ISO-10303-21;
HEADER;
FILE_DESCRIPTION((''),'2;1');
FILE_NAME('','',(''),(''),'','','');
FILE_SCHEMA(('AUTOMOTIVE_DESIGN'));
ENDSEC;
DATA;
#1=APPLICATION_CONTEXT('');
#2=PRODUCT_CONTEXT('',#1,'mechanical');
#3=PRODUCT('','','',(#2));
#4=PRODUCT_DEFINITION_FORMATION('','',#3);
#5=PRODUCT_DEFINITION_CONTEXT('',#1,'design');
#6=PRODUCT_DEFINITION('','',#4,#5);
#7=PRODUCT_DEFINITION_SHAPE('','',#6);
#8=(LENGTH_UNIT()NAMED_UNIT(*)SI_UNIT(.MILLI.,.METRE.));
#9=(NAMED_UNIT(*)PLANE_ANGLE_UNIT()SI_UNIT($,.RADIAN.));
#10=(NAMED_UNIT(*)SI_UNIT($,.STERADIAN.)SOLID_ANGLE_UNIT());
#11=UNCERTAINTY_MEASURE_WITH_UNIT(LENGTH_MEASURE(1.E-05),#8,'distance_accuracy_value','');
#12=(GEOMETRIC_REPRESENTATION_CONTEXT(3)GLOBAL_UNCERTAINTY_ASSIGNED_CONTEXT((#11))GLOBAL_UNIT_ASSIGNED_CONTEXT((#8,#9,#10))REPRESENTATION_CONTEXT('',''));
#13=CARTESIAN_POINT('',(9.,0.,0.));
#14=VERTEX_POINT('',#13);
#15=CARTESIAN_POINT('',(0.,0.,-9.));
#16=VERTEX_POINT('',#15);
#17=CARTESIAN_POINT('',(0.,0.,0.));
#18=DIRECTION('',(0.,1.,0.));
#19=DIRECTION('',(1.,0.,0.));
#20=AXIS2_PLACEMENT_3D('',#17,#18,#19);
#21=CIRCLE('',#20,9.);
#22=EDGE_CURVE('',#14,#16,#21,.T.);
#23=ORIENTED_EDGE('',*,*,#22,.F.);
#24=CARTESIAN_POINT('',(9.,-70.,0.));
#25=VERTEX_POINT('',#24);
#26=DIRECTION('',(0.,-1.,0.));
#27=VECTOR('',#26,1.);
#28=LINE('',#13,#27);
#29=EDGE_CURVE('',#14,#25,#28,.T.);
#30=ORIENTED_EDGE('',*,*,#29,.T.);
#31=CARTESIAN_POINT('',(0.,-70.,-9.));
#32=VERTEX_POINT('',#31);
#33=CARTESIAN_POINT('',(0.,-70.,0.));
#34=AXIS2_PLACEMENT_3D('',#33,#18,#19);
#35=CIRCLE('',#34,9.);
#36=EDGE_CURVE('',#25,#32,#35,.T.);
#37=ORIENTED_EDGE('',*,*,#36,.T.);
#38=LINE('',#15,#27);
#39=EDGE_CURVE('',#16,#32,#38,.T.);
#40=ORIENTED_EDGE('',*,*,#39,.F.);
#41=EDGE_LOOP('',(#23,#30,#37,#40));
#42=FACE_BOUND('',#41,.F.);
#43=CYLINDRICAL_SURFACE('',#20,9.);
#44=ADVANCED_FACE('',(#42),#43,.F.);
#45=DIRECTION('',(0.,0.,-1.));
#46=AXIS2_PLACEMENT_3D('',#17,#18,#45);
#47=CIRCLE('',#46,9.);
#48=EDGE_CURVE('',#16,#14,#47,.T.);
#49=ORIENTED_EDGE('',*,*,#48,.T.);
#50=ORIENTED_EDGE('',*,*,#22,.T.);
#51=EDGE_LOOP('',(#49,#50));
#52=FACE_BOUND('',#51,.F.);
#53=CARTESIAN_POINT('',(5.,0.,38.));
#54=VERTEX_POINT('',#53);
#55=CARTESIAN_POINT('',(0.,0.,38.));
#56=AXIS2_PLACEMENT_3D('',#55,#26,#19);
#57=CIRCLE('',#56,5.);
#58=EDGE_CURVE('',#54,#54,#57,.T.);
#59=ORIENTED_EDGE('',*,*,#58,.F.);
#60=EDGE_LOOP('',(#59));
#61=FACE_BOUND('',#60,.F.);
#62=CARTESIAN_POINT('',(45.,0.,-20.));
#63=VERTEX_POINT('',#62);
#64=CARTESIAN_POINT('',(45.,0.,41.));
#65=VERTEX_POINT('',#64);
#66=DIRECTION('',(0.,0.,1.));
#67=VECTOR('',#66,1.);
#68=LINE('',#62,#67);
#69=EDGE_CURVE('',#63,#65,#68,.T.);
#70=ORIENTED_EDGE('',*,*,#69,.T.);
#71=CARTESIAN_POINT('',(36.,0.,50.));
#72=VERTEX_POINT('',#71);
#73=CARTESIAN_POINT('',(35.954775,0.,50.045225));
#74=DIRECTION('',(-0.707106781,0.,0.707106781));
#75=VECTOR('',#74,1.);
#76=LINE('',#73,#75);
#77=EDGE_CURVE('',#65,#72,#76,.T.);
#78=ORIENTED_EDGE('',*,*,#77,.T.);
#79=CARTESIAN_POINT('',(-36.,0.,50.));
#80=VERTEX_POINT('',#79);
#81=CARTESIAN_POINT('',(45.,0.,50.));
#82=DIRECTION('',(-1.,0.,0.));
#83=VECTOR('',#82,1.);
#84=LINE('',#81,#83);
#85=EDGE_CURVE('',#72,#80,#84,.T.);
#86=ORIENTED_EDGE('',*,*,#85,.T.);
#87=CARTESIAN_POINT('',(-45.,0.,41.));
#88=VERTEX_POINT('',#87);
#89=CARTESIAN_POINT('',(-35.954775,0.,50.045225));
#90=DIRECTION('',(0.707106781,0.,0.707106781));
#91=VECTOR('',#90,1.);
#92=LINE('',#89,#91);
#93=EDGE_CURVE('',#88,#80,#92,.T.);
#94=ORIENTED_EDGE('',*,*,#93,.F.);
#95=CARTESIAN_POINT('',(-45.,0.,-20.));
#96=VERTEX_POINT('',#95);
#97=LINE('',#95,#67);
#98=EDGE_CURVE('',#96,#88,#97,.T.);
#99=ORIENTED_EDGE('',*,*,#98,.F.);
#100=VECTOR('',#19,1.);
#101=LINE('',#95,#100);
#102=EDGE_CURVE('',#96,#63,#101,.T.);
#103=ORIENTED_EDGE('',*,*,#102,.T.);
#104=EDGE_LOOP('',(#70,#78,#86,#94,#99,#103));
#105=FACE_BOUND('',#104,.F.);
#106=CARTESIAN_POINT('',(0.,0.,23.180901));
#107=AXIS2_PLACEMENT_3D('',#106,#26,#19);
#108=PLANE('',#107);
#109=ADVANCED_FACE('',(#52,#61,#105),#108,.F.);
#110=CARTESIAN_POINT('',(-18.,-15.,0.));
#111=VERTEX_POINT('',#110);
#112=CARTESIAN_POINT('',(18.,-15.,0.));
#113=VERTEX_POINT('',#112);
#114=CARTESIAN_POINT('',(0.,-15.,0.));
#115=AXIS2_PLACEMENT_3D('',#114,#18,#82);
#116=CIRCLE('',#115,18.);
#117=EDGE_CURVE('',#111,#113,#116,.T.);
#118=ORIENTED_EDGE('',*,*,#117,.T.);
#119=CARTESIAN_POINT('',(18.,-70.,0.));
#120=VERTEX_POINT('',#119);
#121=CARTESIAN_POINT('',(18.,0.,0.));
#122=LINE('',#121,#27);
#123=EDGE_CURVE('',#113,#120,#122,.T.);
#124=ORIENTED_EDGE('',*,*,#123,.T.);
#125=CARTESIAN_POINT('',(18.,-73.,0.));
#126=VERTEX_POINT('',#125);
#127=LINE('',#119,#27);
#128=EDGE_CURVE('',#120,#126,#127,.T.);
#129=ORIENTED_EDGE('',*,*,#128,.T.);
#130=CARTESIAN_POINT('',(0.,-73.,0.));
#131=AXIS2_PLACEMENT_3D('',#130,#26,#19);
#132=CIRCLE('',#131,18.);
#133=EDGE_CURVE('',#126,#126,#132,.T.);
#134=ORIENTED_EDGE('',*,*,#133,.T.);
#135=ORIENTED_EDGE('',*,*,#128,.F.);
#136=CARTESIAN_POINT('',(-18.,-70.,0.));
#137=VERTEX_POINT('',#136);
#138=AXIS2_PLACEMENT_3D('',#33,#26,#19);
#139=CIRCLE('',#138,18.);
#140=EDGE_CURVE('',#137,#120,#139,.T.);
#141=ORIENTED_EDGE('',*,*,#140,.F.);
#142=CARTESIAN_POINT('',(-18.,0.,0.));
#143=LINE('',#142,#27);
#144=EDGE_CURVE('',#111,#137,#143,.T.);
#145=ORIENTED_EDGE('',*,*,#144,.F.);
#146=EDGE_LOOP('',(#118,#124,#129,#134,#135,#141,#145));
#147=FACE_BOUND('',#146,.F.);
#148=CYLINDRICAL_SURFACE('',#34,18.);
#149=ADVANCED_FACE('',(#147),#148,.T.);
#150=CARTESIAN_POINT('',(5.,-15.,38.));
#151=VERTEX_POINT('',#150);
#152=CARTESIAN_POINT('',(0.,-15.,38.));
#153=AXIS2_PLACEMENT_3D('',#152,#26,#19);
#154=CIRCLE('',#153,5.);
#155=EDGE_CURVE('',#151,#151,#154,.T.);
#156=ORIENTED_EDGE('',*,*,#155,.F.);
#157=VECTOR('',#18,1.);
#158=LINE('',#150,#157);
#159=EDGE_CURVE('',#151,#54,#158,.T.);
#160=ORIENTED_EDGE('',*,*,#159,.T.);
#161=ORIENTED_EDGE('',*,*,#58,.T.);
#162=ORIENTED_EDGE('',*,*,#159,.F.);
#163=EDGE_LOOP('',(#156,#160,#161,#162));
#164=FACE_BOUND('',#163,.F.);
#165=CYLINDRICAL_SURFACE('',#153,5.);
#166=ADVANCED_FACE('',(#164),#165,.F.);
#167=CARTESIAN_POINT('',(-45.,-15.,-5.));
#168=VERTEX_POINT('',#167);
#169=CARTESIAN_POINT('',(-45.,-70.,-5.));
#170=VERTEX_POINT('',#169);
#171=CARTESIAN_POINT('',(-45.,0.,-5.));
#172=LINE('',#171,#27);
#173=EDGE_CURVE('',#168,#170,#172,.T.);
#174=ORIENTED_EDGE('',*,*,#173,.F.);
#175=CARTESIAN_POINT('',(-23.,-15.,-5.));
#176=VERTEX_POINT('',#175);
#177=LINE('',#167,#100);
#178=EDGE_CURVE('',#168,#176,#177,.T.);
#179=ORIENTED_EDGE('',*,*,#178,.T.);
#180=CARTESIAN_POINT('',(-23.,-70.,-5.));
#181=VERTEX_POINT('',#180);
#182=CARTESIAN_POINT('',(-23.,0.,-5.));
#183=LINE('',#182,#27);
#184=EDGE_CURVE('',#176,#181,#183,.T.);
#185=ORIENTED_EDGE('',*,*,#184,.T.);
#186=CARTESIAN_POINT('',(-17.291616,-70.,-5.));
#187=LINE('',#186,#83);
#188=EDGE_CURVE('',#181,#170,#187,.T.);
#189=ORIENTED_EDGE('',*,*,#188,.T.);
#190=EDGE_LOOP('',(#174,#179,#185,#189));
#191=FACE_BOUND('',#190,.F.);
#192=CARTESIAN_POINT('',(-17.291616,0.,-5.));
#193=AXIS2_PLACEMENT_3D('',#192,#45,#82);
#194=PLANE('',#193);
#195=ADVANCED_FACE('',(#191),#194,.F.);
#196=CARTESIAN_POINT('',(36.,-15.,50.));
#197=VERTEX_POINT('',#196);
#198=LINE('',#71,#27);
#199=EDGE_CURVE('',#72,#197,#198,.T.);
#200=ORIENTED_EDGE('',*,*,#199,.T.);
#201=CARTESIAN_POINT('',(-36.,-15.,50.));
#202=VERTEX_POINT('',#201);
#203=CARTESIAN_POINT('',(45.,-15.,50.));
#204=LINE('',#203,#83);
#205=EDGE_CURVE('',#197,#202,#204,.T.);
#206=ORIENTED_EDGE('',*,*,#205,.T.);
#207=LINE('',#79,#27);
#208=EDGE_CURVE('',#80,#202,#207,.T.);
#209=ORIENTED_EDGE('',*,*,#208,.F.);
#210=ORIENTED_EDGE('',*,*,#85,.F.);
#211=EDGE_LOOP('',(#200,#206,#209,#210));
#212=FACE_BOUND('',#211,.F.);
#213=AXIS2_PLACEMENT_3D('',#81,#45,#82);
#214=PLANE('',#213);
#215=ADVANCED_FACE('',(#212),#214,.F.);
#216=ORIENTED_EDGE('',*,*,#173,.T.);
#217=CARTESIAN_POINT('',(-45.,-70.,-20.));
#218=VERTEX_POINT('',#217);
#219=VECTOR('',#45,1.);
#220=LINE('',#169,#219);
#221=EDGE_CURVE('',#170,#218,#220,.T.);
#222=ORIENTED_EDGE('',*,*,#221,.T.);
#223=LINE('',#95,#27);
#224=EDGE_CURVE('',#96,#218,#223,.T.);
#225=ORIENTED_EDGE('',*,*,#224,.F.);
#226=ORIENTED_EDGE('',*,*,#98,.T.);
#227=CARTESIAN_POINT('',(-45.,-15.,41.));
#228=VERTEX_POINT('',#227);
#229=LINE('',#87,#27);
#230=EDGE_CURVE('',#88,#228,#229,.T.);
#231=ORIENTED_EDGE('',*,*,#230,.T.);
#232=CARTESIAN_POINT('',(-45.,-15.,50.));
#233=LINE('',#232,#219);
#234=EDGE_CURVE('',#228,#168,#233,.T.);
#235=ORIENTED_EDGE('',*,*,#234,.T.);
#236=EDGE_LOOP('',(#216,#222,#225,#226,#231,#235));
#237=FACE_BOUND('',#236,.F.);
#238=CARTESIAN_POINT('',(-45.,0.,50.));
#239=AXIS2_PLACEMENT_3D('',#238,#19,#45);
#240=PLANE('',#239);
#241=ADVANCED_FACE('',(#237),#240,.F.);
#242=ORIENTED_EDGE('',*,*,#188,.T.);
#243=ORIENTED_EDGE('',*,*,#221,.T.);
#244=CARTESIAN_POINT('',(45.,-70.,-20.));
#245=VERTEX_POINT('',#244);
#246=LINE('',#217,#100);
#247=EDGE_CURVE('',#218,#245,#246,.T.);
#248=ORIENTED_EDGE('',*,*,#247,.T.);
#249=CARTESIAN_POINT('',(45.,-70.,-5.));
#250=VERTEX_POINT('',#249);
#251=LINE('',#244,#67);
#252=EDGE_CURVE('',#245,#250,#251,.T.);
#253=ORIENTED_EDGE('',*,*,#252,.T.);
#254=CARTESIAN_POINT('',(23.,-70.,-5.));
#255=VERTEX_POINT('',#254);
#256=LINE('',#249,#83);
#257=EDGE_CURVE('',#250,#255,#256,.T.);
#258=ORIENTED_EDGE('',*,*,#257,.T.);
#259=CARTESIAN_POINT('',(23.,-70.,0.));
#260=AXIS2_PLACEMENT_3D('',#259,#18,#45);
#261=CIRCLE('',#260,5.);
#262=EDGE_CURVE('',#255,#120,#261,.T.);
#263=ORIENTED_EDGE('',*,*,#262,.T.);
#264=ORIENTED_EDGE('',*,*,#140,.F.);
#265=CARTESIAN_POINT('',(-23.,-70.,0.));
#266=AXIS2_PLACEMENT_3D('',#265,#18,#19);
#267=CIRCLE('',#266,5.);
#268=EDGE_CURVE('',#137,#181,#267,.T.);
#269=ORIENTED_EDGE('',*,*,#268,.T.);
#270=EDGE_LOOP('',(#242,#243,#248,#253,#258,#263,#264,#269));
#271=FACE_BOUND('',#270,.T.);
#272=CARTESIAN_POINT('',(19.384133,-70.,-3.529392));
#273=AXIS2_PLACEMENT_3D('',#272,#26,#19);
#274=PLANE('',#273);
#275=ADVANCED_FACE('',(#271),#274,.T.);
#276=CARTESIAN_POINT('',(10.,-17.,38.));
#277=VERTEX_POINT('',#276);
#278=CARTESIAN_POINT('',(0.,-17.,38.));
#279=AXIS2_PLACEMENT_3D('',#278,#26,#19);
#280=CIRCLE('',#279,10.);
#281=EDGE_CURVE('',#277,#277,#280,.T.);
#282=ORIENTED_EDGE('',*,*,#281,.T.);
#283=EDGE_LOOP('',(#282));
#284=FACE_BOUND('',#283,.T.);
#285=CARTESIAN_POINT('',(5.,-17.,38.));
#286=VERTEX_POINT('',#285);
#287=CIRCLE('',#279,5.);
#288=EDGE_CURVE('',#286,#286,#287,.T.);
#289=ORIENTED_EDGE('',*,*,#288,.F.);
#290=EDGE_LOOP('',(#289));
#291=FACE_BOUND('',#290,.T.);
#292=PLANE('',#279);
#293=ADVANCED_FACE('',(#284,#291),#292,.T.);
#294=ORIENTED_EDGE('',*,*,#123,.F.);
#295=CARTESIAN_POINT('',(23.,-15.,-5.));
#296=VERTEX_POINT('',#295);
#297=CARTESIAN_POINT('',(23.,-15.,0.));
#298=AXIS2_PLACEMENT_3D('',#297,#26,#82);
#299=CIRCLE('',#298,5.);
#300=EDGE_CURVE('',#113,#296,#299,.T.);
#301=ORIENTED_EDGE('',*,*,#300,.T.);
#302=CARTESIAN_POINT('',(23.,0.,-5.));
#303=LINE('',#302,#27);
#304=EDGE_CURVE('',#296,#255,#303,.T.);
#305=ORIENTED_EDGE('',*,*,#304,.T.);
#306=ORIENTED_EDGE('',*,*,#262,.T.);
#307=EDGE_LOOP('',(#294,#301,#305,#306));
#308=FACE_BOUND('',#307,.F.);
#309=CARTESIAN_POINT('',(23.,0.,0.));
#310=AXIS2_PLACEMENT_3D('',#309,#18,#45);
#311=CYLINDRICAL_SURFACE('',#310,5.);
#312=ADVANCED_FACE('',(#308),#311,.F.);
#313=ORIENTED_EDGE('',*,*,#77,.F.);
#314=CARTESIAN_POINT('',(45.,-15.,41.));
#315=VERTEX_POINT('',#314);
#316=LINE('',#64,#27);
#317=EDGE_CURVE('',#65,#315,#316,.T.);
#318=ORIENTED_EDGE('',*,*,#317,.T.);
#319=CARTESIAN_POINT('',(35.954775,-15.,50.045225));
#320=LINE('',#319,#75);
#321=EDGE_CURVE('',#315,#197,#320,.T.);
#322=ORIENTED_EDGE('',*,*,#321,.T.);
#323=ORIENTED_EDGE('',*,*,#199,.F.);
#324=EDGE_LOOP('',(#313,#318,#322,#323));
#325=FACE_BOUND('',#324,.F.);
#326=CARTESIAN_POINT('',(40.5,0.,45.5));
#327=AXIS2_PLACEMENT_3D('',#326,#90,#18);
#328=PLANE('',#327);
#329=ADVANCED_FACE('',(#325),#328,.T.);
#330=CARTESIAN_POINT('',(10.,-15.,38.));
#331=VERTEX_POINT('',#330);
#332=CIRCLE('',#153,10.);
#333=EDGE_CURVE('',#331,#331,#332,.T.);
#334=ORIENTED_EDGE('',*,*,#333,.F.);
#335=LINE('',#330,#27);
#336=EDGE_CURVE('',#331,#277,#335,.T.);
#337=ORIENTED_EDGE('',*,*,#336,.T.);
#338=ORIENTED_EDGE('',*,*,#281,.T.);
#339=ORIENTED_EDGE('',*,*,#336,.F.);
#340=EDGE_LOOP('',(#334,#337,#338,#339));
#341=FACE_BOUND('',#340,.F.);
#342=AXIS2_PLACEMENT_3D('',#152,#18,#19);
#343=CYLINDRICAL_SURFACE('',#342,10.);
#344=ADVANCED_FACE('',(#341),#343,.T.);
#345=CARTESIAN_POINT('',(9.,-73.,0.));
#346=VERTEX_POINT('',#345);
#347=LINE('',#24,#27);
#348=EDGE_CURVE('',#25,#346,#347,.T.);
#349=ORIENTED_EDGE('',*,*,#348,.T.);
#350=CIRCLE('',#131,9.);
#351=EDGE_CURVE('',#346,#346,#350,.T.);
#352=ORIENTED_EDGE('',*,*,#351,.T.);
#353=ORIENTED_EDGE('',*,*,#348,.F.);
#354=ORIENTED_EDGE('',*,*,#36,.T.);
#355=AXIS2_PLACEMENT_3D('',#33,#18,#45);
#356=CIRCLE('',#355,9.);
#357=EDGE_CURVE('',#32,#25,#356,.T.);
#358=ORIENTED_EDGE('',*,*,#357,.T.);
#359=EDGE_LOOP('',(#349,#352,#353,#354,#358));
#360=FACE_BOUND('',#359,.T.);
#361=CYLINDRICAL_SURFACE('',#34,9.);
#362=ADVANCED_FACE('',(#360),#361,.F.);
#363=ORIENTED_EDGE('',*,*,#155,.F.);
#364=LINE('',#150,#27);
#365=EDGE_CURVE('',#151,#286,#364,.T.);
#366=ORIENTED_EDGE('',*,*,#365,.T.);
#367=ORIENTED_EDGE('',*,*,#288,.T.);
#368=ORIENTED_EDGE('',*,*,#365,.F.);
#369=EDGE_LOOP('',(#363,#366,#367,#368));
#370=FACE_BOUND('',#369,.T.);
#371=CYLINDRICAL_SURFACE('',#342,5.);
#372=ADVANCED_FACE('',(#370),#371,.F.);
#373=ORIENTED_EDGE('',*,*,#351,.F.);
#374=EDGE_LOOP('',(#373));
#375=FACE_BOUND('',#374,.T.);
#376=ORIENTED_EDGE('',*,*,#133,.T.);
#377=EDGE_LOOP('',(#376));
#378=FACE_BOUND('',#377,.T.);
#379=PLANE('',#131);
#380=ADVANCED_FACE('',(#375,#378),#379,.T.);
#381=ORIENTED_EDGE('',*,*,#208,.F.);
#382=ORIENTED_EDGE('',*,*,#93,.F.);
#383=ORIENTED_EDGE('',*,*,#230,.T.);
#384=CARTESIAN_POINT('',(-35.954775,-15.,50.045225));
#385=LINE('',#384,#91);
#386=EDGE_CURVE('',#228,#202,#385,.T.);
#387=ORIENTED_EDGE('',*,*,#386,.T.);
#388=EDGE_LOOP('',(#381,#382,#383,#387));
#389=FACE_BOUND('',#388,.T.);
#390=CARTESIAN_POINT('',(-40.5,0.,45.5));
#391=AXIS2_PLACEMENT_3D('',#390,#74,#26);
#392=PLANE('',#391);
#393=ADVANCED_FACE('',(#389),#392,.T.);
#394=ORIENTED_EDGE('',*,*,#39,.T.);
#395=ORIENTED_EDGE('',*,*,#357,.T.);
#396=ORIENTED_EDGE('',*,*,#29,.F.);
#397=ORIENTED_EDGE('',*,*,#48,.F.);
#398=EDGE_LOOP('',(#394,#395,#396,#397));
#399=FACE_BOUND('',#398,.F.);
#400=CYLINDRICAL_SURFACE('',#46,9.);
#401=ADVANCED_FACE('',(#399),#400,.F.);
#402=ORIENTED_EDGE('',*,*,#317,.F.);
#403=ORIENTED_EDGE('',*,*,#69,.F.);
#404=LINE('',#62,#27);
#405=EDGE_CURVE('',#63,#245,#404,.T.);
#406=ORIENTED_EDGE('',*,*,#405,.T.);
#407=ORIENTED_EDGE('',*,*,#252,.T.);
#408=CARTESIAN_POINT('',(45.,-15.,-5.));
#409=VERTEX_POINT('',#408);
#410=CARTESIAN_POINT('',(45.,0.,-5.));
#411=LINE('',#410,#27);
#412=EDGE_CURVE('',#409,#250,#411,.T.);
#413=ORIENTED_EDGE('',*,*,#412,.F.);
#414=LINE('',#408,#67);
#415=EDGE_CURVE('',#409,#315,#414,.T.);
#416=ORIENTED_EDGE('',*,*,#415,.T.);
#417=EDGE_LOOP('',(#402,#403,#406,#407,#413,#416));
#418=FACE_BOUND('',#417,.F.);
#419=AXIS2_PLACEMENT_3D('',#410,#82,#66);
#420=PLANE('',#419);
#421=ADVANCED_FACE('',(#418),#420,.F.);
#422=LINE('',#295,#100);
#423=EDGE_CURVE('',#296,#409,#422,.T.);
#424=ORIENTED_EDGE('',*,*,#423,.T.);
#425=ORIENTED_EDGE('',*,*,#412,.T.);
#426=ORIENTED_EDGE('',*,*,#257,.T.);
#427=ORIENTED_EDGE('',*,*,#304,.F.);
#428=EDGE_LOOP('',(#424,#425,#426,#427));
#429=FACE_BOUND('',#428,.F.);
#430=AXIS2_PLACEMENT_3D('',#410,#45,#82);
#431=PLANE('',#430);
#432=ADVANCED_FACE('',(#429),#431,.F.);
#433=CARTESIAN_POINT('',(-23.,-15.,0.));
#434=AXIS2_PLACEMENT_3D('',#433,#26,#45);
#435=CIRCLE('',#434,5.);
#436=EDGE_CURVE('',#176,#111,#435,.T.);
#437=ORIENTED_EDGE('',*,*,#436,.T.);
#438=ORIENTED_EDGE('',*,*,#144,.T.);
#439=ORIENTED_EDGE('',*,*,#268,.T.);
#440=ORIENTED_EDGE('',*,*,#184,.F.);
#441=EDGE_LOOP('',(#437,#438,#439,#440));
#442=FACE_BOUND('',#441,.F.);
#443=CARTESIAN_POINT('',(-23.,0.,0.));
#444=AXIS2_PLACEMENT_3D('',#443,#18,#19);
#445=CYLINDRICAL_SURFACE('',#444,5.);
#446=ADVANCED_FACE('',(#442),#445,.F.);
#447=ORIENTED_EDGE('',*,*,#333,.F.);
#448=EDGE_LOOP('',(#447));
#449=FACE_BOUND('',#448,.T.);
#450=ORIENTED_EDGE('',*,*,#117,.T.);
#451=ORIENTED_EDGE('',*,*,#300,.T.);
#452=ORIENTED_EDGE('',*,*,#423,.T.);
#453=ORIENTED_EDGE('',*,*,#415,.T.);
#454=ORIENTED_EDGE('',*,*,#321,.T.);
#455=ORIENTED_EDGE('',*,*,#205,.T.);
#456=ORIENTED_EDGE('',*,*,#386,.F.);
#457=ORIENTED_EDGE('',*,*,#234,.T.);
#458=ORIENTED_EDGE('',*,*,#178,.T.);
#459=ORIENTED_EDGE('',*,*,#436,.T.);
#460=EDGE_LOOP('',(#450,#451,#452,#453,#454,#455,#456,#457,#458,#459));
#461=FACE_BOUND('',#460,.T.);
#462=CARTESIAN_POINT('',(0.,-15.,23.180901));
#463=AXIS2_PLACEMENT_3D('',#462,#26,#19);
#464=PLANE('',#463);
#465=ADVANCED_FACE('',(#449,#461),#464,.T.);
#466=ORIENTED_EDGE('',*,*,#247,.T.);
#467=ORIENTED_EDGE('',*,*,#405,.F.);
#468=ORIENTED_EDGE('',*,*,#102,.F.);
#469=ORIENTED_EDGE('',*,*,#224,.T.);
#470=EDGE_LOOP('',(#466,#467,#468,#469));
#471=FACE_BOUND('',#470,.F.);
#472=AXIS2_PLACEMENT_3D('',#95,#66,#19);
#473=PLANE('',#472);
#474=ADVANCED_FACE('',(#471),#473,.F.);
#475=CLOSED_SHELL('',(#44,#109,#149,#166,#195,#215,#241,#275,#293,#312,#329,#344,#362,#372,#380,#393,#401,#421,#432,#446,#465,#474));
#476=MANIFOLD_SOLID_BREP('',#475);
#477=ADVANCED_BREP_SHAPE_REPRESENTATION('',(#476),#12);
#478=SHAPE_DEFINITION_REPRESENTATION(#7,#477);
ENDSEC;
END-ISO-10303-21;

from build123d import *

# Parameters (mm, degrees)
F1_DEPTH    = 70
F2_T1_DEPTH = 70
F3_T1_DEPTH = 70
F5_DEPTH    = 15
F6_SIZE     = 9
F7_R        = 9
F8_DEPTH    = 3
F9_R        = 5
F10_DEPTH   = 25
F11_R       = 10
F11_R_2     = 5
F12_DEPTH   = 2


# Not quite as in the source:
# - a fillet or chamfer that OpenCascade refuses, or shapes differently, is made with other operations: its cross-section is extruded or revolved along the edge and cut away or added


with BuildPart() as f1:
    # F0 (on Front) → F1 (new body)
    with BuildSketch(Plane.XZ):
        with BuildLine():
            Line((45, -5), (17.2916164658, -5))
            ThreePointArc((17.2916164658, -5), (10.8166538264, -14.3874945699), (0, -18))
            Line((0, -18), (0, -20))
            Line((0, -20), (45, -20))
            Line((45, -20), (45, -5))
        make_face()
        with BuildLine():
            ThreePointArc((17.2916164658, -5), (17.8220242451, -2.5249657043), (18, 0))
            ThreePointArc((18, 0), (-2.5249657043, 17.8220242451), (-17.2916164658, -5))
            ThreePointArc((-17.2916164658, -5), (-10.8166538264, -14.3874945699), (0, -18))
            ThreePointArc((0, -18), (10.8166538264, -14.3874945699), (17.2916164658, -5))
        make_face()
        with BuildLine():
            ThreePointArc((9, 0), (6.3639610307, -6.3639610307), (0, -9))
            ThreePointArc((0, -9), (-6.3639610307, 6.3639610307), (9, 0))
        make_face(mode=Mode.SUBTRACT)
        with BuildLine():
            ThreePointArc((0, -18), (-10.8166538264, -14.3874945699), (-17.2916164658, -5))
            Line((-17.2916164658, -5), (-45, -5))
            Line((-45, -5), (-45, -20))
            Line((-45, -20), (0, -20))
            Line((0, -20), (0, -18))
        make_face()
    extrude(amount=F1_DEPTH)

    # F2: fillet of radius 5 on 1 edges, made by hand

    # F2_s2 → F2_t1 (join)
    with BuildSketch(Plane.XZ):
        with BuildLine():
            ThreePointArc((-18, 0), (-19.4644660941, -3.5355339059), (-23, -5))
            Line((-23, -5), (-17.2916164658, -5))
            ThreePointArc((-17.2916164658, -5), (-17.8220242451, -2.5249657043), (-18, 0))
        make_face()
    extrude(amount=F2_T1_DEPTH)

    # F3: fillet of radius 5 on 1 edges, made by hand

    # F3_s2 → F3_t1 (join)
    with BuildSketch(Plane.XZ):
        with BuildLine():
            ThreePointArc((23, -5), (19.4644660941, -3.5355339059), (18, 0))
            ThreePointArc((18, 0), (17.8220242451, -2.5249657043), (17.2916164658, -5))
            Line((17.2916164658, -5), (23, -5))
        make_face()
    extrude(amount=F3_T1_DEPTH)

    # F4 (on Front) → F5 (join)
    with BuildSketch(Plane.XZ):
        with BuildLine():
            Line((23, -5), (45, -5))
            Line((45, -5), (45, 50))
            Line((45, 50), (-45, 50))
            Line((-45, 50), (-45, -5))
            Line((-45, -5), (-23, -5))
            ThreePointArc((-23, -5), (-19.4644660941, -3.5355339059), (-18, 0))
            ThreePointArc((-18, 0), (0, 18), (18, 0))
            ThreePointArc((18, 0), (19.4644660941, -3.5355339059), (23, -5))
        make_face()
    extrude(amount=F5_DEPTH)

    # F6
    f6_edges = [f1.edges().sort_by_distance(p)[0] for p in [
        (45, -7.5, 50),
        (-45, -7.5, 50),
    ]]
    chamfer(f6_edges, length=F6_SIZE)

    # F7 (on face) → F8 (join)
    with BuildSketch(Plane.XZ.offset(70)):
        with BuildLine():
            ThreePointArc((-18, 0), (0, -18), (18, 0))
            ThreePointArc((18, 0), (0, 18), (-18, 0))
        make_face()
        Circle(F7_R, mode=Mode.SUBTRACT)
    extrude(amount=F8_DEPTH)

    # F9 (on face) → F10 (cut)
    with BuildSketch(Plane.XZ.offset(15)):
        with Locations((0, 38)):
            Circle(F9_R)
    extrude(amount=-F10_DEPTH, mode=Mode.SUBTRACT)

    # F11 (on face) → F12 (join)
    with BuildSketch(Plane.XZ.offset(15)):
        with Locations((0, 38)):
            Circle(F11_R)
        with Locations((0, 38)):
            Circle(F11_R_2, mode=Mode.SUBTRACT)
    extrude(amount=F12_DEPTH)


solid = f1.part
